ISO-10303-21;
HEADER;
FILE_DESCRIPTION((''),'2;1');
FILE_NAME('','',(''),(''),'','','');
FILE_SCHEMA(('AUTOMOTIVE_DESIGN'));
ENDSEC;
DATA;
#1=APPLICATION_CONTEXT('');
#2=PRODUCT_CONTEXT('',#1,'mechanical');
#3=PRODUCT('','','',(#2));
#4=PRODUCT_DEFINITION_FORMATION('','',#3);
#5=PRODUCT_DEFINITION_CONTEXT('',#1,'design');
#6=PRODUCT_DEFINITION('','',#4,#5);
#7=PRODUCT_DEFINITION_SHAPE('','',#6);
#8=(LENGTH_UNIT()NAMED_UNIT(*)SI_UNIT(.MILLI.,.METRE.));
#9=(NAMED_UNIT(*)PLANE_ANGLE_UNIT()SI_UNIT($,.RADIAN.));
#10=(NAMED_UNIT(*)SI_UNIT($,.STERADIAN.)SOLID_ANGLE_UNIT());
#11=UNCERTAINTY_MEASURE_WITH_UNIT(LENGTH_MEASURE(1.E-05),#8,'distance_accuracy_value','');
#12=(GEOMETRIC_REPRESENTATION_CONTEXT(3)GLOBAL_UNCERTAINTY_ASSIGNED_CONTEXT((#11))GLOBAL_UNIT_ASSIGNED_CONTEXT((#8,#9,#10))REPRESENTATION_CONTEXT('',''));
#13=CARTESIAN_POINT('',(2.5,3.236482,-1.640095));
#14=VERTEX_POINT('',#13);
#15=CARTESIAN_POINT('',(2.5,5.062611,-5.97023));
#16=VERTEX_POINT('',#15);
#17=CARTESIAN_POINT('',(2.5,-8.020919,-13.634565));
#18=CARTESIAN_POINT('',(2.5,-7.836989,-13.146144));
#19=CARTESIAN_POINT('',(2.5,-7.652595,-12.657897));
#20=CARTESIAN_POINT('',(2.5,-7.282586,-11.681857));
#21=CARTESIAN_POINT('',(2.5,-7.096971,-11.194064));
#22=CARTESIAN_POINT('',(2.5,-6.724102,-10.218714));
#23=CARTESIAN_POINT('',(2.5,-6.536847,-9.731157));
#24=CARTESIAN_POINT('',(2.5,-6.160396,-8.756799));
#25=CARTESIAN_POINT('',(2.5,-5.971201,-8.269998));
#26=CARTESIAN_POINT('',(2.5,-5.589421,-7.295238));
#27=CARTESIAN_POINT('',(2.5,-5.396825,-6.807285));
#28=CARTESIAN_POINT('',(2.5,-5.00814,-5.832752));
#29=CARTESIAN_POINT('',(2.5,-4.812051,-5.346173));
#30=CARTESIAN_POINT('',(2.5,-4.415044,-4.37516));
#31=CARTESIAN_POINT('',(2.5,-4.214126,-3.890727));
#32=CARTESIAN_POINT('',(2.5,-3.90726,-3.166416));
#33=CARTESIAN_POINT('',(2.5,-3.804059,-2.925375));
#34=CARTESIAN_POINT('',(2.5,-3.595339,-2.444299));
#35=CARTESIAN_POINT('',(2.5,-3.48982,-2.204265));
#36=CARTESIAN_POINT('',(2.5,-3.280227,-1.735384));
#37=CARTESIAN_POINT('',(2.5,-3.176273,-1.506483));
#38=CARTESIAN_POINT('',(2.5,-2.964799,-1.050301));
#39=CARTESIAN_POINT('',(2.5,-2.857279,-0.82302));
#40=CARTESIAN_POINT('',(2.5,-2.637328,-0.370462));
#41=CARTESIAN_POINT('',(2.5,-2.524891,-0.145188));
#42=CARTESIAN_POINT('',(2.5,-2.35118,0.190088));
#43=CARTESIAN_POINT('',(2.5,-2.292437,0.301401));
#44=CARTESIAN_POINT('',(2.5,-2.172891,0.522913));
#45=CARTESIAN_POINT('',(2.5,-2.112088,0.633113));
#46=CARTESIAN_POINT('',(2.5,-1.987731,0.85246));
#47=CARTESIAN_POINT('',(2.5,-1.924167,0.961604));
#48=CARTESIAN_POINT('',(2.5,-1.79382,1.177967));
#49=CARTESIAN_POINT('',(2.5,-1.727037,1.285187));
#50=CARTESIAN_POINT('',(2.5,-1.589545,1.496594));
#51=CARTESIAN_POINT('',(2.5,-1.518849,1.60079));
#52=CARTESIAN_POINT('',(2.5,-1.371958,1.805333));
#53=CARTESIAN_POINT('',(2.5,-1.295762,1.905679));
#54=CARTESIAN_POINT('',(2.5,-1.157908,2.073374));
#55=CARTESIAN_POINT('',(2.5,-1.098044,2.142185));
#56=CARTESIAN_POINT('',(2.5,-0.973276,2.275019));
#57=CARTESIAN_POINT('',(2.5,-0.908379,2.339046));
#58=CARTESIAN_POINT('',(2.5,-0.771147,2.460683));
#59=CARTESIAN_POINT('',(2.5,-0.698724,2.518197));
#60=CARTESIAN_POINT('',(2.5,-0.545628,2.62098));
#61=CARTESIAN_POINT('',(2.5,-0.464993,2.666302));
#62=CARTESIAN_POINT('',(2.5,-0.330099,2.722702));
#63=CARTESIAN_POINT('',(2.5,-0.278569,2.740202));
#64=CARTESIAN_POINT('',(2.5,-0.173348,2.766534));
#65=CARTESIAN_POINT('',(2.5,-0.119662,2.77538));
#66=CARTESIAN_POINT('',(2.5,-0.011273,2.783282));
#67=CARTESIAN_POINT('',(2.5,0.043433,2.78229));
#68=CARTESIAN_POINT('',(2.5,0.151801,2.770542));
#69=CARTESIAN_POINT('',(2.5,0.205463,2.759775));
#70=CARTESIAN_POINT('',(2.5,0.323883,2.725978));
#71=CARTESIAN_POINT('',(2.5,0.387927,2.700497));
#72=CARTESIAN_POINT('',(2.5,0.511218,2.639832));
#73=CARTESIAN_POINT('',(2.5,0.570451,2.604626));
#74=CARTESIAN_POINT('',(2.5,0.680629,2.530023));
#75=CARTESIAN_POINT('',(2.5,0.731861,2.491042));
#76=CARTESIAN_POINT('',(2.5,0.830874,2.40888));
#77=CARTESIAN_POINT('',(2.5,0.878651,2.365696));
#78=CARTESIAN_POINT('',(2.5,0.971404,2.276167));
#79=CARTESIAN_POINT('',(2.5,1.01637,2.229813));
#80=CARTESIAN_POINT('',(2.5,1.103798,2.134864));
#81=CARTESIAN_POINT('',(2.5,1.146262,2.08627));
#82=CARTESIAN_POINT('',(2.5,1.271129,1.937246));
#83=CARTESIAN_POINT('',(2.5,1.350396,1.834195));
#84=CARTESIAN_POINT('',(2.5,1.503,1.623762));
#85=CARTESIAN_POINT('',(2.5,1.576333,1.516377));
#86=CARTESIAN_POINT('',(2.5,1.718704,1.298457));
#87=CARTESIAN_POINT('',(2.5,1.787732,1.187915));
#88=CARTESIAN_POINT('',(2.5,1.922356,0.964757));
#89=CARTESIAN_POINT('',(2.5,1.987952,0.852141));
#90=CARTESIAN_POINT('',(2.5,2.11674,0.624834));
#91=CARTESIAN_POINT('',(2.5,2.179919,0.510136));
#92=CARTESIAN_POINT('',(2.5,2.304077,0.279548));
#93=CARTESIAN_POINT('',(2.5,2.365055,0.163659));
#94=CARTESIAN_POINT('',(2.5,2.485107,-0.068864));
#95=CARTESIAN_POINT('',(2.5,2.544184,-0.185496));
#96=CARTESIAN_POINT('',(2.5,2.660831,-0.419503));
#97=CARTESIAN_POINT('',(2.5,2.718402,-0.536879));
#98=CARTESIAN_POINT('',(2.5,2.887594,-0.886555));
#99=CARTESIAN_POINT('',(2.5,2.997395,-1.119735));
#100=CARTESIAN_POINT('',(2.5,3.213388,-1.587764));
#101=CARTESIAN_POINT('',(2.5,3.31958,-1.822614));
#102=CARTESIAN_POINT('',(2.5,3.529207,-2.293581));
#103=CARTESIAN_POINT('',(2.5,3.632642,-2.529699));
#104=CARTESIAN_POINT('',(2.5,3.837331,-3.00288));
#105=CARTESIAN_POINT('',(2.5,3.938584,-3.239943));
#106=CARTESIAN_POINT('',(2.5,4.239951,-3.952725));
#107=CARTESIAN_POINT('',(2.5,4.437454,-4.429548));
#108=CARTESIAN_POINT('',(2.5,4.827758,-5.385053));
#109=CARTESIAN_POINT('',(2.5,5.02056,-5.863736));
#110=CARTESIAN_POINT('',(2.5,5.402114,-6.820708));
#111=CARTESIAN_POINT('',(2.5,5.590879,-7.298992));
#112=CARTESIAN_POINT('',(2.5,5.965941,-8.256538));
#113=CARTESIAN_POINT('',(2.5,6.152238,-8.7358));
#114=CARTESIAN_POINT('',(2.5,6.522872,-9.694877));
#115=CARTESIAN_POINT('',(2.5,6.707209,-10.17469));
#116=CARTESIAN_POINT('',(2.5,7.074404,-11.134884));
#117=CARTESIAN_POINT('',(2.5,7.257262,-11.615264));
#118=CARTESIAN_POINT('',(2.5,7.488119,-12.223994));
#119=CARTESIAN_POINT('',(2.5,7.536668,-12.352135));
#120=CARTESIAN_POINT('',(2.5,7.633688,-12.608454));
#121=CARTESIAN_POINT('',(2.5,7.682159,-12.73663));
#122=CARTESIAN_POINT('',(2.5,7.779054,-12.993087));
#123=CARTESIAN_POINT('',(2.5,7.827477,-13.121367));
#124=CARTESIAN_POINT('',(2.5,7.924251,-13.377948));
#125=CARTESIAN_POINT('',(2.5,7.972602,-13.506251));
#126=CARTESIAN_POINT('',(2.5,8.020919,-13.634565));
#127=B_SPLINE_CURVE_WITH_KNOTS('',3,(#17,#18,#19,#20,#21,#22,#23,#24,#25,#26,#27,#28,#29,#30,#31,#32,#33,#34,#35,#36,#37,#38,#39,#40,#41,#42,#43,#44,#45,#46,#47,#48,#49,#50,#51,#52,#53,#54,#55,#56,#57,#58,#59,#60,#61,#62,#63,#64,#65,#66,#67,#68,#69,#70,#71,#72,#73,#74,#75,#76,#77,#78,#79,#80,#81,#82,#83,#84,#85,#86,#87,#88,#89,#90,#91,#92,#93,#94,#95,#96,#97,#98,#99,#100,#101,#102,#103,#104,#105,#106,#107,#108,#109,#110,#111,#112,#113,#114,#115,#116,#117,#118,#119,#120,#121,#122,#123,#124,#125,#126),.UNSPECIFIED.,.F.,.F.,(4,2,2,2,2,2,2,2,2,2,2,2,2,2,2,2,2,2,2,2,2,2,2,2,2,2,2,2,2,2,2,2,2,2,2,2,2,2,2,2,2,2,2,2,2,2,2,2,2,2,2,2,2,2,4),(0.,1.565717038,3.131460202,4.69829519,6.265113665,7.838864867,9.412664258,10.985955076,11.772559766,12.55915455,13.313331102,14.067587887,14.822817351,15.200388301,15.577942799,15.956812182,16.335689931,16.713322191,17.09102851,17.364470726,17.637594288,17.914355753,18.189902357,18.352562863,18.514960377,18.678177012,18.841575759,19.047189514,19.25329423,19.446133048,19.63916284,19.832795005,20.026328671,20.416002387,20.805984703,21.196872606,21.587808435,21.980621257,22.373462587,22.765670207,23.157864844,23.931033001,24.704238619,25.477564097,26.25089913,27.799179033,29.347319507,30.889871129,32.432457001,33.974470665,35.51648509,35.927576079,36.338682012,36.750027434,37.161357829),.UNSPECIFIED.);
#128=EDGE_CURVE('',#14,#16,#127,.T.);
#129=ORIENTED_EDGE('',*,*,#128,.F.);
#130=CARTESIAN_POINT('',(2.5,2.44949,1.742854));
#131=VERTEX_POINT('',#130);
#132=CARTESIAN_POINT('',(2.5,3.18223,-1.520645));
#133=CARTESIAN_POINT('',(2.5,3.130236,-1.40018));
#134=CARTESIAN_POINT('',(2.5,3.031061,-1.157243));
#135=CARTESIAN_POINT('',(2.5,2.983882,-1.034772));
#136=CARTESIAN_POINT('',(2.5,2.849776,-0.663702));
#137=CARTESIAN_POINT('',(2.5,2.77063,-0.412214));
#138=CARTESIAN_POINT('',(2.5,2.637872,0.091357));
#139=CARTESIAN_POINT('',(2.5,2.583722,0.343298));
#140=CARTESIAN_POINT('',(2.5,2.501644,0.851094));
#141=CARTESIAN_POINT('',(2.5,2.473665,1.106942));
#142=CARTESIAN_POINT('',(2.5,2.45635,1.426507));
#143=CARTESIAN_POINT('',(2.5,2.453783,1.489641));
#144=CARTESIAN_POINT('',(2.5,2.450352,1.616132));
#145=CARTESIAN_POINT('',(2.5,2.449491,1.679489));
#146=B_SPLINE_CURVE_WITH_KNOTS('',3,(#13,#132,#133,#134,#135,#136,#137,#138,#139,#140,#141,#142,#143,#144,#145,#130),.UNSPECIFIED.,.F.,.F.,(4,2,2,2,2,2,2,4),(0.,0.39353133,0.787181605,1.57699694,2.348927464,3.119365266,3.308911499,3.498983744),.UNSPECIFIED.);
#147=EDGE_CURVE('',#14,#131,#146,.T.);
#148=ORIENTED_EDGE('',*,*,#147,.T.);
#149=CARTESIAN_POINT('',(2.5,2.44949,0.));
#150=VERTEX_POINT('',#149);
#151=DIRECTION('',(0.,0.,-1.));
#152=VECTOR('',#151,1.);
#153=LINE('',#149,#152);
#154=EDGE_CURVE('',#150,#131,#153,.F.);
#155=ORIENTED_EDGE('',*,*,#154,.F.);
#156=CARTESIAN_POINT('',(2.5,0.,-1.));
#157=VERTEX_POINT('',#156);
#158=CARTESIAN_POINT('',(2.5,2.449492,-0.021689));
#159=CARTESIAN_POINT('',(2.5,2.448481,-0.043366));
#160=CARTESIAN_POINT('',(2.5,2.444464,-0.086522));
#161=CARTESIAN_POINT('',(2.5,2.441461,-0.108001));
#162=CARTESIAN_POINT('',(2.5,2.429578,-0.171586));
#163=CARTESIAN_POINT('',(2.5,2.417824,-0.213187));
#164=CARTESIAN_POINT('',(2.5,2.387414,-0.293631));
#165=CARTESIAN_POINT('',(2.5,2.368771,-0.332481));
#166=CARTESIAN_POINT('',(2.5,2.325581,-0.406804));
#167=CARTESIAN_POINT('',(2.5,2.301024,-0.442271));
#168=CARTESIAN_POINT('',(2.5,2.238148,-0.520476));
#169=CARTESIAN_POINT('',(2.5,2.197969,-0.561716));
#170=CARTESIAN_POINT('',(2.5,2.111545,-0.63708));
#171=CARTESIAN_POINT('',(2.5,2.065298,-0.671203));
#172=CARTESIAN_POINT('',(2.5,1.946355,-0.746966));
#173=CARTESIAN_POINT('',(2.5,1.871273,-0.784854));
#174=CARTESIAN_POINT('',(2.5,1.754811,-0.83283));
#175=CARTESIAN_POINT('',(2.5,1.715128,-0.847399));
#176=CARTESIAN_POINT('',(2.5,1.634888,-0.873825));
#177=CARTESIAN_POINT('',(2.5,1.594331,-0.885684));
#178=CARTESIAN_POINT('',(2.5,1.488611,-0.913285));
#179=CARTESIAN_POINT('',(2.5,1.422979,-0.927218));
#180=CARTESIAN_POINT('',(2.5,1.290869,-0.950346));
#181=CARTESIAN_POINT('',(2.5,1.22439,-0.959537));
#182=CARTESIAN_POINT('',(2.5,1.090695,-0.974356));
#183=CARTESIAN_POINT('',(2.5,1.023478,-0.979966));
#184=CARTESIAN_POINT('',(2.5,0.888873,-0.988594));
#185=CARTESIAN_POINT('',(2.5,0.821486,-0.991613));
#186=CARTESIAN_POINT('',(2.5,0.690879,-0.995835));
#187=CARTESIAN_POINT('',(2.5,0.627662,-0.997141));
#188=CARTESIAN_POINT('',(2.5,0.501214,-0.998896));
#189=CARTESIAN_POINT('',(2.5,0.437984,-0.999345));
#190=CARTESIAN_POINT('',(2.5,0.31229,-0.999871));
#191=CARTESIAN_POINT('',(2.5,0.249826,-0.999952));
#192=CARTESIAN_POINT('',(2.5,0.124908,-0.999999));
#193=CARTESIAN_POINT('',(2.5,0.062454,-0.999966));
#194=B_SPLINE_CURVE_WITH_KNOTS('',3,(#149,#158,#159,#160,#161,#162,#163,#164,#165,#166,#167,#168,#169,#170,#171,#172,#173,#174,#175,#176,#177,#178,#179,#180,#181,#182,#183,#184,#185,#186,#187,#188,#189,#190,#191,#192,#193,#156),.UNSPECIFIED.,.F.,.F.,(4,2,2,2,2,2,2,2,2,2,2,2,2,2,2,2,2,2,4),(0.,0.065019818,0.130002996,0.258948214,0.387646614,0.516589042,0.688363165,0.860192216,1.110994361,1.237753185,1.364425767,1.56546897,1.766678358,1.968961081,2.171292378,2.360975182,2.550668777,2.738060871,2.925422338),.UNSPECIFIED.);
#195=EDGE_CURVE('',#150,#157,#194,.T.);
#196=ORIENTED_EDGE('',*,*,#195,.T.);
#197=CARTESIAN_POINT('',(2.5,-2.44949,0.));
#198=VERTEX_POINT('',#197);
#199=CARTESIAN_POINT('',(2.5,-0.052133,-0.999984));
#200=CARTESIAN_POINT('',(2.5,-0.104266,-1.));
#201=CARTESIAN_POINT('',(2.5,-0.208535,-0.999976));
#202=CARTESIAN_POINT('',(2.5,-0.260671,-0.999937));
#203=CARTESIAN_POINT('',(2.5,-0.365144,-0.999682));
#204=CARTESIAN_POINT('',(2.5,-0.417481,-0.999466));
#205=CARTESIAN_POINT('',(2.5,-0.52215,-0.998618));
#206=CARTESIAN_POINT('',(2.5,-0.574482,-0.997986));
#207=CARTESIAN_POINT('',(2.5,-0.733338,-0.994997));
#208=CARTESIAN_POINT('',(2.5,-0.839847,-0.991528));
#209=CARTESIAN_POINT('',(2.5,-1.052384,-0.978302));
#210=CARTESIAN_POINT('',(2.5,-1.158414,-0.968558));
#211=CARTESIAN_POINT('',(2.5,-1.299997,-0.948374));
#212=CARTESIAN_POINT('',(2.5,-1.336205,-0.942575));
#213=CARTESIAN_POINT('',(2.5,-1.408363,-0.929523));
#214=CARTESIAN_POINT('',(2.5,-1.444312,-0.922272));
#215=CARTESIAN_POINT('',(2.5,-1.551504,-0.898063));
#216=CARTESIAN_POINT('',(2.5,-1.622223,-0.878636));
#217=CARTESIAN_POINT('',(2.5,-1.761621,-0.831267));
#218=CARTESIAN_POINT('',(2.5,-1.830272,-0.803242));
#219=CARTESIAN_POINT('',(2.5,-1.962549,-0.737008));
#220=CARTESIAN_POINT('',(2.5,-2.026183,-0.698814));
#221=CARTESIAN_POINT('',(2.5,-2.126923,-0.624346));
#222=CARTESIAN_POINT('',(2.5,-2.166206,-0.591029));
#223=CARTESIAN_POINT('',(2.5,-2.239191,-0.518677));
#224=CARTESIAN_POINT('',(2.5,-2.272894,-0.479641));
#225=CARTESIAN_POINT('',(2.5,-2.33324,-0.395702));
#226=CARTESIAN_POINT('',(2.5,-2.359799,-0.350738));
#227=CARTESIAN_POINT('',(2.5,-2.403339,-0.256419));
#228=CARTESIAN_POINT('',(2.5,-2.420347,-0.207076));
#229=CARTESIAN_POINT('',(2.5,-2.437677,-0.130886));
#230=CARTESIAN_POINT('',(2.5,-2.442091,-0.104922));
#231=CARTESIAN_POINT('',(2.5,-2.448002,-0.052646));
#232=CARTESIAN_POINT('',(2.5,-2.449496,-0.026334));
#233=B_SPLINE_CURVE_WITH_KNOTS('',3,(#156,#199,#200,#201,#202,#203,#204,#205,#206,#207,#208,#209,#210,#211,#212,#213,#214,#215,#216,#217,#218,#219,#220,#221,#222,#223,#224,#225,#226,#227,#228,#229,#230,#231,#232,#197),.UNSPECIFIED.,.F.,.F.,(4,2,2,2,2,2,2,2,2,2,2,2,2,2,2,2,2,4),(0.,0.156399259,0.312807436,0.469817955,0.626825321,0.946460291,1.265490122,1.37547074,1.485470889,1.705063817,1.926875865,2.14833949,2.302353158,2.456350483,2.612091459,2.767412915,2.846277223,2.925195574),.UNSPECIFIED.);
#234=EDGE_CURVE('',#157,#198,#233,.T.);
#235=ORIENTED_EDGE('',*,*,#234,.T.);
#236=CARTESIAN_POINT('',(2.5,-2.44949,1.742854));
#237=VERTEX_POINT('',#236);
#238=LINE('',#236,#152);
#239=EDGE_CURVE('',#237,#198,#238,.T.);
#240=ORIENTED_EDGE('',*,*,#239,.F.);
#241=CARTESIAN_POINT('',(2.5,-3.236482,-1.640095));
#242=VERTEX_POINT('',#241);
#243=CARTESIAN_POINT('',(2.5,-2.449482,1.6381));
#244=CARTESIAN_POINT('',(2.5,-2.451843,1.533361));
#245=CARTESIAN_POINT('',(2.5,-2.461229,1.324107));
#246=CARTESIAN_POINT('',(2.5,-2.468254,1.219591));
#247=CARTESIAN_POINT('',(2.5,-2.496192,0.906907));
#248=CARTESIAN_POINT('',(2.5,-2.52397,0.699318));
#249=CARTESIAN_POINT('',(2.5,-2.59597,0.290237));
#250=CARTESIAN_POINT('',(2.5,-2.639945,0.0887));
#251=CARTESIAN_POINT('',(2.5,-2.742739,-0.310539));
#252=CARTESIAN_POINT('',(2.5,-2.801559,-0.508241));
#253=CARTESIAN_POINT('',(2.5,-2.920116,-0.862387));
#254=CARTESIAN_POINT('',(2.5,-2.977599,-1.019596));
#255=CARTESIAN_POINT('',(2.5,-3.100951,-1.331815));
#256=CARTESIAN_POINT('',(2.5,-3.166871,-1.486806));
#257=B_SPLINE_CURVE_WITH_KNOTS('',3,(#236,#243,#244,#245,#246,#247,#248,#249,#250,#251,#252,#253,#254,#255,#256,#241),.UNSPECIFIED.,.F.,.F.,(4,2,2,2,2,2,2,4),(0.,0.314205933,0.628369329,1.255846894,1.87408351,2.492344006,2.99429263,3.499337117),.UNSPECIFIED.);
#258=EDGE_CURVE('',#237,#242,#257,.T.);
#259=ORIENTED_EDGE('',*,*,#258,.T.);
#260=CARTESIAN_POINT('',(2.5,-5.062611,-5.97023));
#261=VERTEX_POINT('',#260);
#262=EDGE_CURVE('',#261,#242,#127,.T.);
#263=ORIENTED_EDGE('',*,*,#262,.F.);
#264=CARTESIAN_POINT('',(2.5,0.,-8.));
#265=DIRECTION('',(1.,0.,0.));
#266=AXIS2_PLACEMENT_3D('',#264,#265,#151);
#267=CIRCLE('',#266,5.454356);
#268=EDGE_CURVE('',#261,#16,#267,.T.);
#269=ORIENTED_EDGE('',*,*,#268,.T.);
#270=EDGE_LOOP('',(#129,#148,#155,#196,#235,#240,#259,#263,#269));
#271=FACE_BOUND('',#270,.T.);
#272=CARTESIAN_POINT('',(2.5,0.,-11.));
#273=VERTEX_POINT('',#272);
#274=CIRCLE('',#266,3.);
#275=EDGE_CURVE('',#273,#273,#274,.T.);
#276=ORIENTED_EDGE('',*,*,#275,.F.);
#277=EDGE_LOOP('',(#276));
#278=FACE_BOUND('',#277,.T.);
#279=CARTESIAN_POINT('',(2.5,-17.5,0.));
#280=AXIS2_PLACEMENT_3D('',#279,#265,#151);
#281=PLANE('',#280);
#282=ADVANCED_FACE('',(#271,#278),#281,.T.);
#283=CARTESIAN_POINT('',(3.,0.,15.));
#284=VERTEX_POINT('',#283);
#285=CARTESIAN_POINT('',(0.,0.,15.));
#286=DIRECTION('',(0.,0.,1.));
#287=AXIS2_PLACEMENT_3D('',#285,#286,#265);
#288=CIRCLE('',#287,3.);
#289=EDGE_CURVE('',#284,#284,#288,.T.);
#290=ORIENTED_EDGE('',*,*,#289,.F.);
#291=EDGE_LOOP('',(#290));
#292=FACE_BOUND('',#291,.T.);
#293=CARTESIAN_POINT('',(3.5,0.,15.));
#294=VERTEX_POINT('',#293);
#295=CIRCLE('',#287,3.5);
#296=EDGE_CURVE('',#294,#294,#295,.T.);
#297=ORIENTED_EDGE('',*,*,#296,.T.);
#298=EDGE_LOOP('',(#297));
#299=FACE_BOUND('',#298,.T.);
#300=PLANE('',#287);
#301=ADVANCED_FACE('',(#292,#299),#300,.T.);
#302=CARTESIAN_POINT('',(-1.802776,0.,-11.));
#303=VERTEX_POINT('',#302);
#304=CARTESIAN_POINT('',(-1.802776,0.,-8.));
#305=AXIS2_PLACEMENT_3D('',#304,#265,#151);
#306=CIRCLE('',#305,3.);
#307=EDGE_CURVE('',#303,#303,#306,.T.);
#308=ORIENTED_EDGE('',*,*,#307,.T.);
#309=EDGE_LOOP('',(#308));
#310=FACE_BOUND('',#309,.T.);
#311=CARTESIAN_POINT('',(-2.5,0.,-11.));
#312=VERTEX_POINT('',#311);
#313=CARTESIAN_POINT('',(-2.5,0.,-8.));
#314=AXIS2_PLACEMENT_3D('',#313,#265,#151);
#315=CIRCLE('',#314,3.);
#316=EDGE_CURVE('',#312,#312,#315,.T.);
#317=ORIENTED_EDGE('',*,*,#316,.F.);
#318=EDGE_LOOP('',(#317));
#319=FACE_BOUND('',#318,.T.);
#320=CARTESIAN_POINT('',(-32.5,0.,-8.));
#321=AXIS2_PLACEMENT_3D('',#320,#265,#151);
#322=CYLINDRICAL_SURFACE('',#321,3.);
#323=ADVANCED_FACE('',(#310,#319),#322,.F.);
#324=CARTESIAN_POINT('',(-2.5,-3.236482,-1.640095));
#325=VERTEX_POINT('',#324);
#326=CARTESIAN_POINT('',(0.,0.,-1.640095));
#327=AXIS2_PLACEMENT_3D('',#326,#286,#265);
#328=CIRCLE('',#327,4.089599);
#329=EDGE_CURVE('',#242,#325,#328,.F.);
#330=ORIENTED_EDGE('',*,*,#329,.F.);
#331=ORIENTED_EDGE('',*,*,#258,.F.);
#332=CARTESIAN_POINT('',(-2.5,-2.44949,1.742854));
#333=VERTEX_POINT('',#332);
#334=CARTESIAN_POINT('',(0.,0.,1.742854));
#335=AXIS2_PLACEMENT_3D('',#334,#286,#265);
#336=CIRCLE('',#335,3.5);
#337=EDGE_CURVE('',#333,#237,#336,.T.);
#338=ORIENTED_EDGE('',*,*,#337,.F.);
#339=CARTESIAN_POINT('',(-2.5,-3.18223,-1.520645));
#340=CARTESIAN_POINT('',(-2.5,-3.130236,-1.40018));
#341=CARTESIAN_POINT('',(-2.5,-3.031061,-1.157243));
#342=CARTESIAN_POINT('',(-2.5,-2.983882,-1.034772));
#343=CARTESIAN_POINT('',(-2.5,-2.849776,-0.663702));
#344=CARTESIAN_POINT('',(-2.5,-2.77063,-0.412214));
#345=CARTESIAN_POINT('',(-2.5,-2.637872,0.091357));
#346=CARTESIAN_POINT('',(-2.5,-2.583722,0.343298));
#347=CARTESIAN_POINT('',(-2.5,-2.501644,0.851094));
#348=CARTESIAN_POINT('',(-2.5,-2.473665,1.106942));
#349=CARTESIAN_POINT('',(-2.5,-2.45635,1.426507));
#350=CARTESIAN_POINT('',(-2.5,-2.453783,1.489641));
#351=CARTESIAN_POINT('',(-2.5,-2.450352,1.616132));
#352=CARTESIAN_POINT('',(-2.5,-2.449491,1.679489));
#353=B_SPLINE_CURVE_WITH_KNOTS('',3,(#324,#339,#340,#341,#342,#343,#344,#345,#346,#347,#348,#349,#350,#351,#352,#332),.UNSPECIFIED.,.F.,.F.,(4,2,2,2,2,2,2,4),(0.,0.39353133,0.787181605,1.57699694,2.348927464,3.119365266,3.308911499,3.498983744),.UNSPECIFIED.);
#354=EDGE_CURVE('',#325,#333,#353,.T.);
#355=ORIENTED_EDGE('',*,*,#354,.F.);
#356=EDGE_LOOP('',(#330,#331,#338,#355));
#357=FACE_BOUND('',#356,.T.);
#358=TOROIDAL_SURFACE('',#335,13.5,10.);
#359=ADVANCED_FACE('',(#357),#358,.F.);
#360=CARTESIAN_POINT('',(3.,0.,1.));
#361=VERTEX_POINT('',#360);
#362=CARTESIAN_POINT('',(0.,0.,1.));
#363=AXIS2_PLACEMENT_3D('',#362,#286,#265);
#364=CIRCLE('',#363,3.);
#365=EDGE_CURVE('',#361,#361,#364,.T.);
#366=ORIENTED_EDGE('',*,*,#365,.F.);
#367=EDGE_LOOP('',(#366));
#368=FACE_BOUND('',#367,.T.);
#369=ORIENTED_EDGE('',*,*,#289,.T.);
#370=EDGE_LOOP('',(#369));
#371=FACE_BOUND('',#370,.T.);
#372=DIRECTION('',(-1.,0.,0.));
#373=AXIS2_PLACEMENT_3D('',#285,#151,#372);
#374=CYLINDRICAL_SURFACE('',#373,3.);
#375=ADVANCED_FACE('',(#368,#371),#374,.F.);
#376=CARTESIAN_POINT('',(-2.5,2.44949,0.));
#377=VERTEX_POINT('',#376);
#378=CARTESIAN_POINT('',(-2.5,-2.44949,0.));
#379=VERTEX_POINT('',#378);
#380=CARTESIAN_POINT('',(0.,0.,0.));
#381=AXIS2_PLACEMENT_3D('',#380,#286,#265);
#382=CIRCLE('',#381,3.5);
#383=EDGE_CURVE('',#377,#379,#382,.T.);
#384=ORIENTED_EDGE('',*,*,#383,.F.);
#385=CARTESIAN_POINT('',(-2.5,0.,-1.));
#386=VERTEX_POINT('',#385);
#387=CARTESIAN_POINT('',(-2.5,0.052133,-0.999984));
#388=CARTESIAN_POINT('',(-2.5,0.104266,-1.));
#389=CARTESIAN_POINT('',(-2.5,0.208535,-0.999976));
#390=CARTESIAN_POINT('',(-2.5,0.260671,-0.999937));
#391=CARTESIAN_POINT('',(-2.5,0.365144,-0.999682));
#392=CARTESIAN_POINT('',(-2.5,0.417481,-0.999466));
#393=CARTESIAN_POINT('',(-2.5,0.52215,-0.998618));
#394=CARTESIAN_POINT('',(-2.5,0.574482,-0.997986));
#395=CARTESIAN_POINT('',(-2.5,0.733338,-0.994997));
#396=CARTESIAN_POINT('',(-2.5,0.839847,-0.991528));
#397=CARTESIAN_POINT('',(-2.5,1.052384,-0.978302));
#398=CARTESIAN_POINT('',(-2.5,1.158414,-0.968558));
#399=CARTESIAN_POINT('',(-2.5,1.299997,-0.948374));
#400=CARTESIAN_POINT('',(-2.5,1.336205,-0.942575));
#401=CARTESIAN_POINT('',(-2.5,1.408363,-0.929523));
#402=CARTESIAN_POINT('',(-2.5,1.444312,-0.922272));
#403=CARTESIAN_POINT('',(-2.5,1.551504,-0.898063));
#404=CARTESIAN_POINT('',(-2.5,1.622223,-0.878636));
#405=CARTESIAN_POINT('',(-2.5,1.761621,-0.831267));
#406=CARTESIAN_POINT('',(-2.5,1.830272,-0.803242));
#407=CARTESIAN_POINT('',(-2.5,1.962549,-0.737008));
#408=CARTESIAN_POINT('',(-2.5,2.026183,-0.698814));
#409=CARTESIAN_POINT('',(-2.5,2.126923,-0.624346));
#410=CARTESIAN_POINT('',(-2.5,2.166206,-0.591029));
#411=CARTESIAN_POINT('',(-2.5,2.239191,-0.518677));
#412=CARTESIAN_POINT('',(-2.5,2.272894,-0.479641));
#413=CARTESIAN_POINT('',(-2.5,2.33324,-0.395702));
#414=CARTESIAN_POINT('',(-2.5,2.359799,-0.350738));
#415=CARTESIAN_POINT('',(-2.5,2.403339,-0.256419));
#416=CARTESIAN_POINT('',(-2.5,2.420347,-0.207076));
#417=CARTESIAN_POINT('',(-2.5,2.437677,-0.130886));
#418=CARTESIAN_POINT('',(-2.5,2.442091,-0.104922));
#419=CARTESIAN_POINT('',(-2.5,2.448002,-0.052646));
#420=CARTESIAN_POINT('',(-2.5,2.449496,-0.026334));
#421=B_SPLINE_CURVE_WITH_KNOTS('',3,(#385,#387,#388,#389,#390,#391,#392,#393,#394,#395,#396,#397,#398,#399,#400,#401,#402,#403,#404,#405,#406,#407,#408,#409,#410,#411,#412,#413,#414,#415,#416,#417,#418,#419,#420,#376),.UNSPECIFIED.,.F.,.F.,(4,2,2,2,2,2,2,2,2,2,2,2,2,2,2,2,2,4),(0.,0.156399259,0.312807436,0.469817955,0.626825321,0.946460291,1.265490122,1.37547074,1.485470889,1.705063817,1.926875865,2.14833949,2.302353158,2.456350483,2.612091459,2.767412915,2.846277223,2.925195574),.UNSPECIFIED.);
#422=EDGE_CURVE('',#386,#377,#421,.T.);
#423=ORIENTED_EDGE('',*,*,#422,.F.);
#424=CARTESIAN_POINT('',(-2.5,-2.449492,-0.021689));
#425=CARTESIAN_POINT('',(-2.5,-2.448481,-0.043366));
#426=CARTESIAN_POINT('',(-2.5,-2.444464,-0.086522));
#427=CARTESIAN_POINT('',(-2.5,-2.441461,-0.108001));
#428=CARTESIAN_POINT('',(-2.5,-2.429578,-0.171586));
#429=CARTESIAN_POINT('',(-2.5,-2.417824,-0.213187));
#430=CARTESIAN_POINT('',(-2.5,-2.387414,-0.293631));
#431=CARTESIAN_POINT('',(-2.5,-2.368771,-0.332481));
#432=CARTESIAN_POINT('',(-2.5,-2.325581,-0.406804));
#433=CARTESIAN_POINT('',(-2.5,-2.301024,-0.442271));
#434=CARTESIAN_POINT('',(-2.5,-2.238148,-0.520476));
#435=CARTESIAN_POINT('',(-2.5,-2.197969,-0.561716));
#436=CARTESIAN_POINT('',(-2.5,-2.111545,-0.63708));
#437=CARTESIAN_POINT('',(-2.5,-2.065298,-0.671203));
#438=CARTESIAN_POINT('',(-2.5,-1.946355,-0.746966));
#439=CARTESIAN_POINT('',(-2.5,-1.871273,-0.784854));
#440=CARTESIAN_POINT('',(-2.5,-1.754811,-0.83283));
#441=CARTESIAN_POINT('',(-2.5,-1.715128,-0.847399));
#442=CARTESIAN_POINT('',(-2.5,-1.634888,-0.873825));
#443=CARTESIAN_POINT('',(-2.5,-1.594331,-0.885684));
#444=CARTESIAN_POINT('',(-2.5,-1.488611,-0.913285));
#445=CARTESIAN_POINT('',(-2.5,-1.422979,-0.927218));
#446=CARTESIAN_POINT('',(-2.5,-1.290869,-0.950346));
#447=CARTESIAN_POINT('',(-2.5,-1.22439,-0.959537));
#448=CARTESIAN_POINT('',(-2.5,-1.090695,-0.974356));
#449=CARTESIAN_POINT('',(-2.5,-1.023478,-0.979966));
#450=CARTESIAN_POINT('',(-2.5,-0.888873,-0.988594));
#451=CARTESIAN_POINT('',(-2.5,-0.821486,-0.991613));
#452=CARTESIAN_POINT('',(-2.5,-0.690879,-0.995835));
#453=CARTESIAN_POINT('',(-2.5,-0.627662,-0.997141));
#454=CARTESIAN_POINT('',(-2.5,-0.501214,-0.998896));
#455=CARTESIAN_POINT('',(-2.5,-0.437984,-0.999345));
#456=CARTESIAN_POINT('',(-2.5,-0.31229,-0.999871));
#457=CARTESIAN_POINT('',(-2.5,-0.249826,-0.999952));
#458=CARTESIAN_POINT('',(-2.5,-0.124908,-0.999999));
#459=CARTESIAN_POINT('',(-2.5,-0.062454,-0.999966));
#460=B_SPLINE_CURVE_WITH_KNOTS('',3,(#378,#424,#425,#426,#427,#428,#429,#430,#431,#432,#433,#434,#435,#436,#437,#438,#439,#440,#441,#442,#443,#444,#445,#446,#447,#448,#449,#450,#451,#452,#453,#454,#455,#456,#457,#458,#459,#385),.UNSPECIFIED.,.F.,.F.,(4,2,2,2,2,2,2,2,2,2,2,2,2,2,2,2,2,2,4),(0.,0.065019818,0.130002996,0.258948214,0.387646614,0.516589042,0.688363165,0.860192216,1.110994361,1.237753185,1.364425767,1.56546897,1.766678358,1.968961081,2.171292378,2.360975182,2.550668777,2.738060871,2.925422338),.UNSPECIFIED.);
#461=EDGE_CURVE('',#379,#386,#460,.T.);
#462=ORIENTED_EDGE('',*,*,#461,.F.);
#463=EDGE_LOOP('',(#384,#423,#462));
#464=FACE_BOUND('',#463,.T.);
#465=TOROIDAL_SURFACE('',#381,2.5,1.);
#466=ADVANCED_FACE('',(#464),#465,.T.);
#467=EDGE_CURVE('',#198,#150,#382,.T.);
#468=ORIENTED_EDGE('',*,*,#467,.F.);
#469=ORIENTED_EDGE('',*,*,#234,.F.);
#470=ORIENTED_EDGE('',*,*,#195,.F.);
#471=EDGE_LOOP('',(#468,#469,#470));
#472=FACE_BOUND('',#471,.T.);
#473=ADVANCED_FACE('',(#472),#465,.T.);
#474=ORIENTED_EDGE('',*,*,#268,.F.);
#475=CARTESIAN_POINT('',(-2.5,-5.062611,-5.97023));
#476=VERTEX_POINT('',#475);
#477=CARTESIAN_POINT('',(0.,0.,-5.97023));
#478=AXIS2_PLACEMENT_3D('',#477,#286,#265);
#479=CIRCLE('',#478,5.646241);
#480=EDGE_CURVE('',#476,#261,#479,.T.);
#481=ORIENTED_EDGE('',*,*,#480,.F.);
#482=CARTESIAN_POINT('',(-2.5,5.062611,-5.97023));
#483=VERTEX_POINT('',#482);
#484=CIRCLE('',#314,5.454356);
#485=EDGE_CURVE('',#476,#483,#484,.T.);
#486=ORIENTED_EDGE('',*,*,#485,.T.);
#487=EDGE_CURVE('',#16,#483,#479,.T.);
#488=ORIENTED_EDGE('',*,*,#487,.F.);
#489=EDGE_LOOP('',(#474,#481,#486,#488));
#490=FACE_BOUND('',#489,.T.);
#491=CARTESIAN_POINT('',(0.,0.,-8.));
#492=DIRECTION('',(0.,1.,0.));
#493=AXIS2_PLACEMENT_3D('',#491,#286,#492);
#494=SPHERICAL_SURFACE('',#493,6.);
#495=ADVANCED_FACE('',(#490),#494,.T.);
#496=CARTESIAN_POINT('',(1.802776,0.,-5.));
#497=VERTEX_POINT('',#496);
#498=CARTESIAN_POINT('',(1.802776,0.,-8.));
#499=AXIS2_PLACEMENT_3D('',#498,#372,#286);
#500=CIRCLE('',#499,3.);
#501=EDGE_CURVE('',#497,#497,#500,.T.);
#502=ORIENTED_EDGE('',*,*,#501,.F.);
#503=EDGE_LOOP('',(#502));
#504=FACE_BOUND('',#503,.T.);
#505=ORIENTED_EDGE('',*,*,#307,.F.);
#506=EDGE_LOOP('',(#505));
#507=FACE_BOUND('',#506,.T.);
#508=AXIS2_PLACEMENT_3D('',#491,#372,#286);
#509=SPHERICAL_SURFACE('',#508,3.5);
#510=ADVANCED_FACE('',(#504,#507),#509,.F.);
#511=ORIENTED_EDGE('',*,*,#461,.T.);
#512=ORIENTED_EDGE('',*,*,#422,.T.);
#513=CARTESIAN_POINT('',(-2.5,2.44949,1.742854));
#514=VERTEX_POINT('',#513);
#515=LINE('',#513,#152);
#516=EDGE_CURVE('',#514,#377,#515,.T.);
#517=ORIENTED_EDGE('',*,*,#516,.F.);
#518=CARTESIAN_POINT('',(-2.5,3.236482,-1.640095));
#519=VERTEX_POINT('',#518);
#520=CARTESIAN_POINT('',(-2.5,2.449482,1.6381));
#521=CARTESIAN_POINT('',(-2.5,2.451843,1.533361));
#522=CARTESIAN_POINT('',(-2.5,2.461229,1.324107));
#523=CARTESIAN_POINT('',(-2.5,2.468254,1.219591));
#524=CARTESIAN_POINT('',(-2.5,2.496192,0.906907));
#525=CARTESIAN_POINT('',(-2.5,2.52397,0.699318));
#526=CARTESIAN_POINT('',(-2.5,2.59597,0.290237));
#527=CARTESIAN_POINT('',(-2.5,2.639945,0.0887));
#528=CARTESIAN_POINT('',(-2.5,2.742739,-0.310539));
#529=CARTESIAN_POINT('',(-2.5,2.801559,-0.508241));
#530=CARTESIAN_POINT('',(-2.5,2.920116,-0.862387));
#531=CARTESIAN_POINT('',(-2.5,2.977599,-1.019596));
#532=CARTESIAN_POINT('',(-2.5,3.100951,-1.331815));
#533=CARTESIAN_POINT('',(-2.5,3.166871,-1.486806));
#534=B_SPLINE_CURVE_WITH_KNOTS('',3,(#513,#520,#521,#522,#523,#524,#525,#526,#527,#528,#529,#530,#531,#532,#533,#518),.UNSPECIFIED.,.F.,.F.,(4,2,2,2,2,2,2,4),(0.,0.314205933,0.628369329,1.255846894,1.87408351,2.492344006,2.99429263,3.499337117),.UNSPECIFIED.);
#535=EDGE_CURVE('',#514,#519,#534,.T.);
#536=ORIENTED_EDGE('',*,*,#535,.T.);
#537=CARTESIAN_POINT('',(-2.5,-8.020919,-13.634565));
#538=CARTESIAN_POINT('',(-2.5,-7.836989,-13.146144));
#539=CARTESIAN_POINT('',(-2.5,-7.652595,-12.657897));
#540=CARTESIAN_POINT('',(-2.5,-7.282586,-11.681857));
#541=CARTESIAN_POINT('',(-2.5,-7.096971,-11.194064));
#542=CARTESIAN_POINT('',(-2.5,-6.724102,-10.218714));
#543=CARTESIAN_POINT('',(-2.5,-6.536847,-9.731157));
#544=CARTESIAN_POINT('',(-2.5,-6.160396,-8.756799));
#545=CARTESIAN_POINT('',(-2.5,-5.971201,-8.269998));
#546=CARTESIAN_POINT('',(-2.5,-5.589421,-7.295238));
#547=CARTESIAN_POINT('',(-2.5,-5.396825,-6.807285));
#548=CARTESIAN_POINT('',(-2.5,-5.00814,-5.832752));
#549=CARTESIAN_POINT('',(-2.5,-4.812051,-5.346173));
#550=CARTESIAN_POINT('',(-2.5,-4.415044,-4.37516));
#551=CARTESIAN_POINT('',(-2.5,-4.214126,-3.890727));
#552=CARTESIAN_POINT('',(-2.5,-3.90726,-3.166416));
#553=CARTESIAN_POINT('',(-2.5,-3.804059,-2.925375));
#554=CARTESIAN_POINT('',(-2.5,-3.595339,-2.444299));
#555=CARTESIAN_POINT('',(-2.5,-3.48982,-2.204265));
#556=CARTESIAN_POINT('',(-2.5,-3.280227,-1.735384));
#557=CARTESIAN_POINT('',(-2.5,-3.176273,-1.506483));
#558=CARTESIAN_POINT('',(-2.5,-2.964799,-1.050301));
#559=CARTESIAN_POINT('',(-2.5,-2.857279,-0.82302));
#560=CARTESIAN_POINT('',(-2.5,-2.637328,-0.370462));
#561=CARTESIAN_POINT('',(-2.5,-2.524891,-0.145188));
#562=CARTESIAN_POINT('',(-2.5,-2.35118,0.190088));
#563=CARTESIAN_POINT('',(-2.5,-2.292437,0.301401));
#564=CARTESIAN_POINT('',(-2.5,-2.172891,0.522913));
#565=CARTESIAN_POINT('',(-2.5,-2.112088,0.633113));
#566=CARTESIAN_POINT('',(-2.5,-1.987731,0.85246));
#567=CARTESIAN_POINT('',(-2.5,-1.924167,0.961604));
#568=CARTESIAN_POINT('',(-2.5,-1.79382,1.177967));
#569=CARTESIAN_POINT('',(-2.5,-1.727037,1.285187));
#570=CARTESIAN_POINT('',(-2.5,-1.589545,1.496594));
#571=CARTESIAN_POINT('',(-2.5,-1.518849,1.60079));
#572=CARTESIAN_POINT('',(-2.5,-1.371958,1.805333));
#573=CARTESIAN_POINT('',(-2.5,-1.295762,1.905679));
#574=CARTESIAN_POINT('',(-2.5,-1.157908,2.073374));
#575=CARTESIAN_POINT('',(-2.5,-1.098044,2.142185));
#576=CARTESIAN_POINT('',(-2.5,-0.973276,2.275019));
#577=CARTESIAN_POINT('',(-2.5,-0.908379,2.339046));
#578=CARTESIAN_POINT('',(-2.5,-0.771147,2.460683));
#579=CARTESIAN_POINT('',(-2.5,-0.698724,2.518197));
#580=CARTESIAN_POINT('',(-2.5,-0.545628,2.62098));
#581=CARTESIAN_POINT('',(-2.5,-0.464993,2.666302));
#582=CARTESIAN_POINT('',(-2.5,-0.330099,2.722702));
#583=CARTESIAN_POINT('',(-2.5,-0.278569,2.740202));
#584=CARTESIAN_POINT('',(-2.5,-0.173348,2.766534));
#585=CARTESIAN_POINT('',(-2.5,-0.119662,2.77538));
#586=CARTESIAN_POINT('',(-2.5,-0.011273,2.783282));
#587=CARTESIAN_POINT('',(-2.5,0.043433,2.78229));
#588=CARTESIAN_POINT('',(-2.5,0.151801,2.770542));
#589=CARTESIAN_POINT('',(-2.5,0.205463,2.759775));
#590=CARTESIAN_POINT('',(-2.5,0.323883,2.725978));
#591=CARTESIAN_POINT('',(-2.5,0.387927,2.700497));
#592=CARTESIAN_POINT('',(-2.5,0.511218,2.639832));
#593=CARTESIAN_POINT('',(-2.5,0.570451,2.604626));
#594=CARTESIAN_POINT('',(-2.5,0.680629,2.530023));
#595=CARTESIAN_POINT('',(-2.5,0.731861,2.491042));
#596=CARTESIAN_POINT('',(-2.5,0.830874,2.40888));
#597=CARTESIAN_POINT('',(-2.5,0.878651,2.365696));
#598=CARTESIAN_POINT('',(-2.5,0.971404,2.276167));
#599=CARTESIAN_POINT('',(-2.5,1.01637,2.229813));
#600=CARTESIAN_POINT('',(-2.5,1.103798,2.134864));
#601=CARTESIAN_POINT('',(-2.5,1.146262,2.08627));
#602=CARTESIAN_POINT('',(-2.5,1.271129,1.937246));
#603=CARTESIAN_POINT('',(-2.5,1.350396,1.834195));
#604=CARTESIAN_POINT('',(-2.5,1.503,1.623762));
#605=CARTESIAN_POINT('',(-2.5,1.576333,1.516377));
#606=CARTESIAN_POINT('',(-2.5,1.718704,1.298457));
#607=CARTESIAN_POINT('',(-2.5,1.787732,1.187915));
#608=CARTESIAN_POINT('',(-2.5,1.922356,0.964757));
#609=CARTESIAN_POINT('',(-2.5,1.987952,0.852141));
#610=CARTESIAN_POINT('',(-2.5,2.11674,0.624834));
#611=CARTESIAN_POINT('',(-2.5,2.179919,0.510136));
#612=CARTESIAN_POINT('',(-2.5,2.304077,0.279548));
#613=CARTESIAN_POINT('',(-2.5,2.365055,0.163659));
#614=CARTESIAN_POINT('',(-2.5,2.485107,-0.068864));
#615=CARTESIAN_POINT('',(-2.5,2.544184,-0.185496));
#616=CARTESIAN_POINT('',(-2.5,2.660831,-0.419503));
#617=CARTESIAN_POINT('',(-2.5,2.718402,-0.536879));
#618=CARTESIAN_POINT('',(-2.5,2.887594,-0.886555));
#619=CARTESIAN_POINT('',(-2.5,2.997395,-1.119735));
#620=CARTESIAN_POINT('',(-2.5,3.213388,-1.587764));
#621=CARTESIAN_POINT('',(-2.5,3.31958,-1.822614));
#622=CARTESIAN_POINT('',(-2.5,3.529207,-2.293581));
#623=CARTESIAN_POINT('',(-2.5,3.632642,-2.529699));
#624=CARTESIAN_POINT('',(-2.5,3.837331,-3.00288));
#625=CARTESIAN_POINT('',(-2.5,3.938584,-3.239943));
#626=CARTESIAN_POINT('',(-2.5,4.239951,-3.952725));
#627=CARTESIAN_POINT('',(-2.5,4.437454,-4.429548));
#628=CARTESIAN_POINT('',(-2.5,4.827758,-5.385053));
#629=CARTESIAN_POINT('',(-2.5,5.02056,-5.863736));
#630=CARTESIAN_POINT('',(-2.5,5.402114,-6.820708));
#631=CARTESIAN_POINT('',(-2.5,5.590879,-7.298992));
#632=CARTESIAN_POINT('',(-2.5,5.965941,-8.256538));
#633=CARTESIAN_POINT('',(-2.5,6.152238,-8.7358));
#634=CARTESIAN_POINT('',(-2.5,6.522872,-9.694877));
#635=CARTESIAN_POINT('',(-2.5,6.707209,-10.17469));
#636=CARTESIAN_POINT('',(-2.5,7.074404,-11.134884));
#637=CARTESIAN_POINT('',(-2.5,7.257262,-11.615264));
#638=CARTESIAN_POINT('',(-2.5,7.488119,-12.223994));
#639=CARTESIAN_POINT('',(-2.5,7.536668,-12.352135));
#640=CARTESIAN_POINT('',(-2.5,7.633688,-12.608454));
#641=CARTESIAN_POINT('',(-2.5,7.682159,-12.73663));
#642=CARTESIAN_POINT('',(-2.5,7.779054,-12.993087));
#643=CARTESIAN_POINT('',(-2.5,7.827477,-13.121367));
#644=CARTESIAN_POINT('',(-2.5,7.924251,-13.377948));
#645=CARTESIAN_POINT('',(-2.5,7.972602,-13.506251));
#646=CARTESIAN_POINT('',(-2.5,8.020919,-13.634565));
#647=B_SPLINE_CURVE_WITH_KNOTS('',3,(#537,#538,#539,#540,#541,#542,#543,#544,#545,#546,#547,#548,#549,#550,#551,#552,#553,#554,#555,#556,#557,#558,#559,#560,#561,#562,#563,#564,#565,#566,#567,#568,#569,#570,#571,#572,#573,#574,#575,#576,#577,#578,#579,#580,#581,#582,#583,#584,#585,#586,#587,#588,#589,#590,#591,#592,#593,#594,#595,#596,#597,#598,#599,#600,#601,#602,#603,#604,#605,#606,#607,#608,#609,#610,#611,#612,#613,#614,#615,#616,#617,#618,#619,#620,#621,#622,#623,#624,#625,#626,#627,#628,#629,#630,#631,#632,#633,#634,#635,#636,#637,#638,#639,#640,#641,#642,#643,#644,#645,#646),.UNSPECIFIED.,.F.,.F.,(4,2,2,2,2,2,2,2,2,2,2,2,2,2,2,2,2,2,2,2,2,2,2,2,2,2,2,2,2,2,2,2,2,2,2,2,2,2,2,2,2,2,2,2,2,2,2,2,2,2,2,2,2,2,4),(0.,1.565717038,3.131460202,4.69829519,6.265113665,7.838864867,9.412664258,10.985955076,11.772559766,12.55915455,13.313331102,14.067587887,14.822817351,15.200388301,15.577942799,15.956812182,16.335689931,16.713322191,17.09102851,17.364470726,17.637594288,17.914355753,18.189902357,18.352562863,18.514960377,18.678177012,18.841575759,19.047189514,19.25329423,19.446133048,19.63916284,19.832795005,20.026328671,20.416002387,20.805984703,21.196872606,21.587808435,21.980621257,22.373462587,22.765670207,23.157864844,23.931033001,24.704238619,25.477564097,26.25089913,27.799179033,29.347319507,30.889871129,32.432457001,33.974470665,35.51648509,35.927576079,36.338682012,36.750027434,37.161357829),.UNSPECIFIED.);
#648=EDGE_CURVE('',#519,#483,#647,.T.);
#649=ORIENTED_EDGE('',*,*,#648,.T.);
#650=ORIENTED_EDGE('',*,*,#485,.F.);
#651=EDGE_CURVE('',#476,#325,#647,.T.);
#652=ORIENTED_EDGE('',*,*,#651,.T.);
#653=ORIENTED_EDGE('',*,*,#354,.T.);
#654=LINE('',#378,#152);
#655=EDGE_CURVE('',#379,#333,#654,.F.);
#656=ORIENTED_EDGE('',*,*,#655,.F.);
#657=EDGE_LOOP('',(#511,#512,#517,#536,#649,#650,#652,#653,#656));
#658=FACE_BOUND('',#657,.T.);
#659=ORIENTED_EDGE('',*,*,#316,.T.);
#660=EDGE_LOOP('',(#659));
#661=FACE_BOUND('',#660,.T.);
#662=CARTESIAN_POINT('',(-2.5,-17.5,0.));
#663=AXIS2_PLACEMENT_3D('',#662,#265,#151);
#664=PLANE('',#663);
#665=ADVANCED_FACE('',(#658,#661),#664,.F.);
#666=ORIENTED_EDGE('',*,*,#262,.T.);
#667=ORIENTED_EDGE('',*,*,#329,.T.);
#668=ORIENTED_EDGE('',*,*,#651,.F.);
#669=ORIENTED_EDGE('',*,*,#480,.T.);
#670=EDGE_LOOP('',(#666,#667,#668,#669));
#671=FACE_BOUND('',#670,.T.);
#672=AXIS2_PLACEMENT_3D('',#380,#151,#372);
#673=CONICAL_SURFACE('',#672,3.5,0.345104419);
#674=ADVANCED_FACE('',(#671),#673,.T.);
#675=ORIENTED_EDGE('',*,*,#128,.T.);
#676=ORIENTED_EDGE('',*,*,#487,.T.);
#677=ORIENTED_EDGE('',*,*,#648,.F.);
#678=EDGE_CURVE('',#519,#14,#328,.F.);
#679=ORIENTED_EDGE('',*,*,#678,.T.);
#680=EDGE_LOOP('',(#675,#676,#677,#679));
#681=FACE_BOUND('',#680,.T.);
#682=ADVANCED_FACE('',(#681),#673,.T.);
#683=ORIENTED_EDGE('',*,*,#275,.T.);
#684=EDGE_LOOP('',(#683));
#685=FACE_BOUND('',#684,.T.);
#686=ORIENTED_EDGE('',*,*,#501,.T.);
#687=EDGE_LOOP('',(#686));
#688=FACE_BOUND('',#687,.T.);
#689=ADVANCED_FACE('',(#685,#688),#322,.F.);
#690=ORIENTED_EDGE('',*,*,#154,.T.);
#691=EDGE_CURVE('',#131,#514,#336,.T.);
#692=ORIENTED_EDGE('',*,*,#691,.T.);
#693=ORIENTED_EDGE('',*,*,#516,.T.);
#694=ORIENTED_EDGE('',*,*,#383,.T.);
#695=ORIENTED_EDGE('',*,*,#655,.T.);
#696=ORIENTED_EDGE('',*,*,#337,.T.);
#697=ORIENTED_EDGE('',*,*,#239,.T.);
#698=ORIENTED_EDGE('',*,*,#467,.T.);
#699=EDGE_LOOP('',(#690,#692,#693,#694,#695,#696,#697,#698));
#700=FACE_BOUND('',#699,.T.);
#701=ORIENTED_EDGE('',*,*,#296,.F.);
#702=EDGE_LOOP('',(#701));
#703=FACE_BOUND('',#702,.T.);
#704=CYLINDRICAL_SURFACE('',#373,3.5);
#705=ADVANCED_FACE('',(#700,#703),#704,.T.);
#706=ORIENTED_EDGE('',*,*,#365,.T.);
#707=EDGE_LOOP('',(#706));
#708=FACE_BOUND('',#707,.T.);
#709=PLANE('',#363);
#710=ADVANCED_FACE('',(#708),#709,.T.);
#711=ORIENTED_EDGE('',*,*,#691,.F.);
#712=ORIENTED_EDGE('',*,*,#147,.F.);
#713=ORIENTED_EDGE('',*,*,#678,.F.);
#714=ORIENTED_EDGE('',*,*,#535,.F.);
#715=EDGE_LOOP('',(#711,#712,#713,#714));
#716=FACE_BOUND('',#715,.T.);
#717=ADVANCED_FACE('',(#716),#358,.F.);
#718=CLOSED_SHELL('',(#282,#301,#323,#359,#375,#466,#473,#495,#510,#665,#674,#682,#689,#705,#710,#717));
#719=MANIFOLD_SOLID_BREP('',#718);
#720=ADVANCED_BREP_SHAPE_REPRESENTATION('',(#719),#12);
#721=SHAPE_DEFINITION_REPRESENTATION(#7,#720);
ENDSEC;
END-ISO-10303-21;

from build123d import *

# Parameters (mm, degrees)
SKETCH2_W           = 3.765548925
SKETCH2_H           = 14.748929387
SKETCH2_W_2         = 4.619974481
CUT_EXTRUDE1_DEPTH  = 17.5
CHAMFER1_SIZE       = 0.353571801
CHAMFER1_SIZE_2     = 0.5
SKETCH3_R           = 3
CUT_EXTRUDE2_DEPTH  = 35
SKETCH4_R           = 3.5
SKETCH4_R_2         = 3
BOSS_EXTRUDE1_DEPTH = 15
BOSS_EXTRUDE2_DEPTH = 1
BOSS_EXTRUDE3_START = -1
SKETCH4_2_R         = 3.5
SKETCH4_2_R_2       = 3
BOSS_EXTRUDE3_DEPTH = 1
BOSS_EXTRUDE4_START = -1
BOSS_EXTRUDE4_DEPTH = 1
FILLET1_R           = 1
FILLET2_R           = 10


# Some blends are built 0.0001 mm under size
with BuildPart() as part:
    # Sketch1 → Revolve1 (revolve)
    with BuildSketch(Plane(origin=(0, 0, 0), x_dir=(0, 0, -1), z_dir=(1, 0, 0))):
        with BuildLine():
            Line((0, 3.5), (0, 0))
            Line((0, 0), (4.5, 0))
            ThreePointArc((4.5, 0), (8, 3.5), (11.5, 0))
            Line((11.5, 0), (14, 0))
            ThreePointArc((14, 0), (11.451186904, 4.908086078), (5.97023035, 5.6462408))
            Line((5.97023035, 5.6462408), (0, 3.5))
        make_face()
    revolve(axis=Axis((0, 0, 0), (0, 0, -1)))

    # Sketch2 → Cut-Extrude1 (cut, symmetric)
    with BuildSketch(Plane(origin=(0, 0, 0), x_dir=(1, 0, 0), z_dir=(0, 1, 0))):
        with Locations((-4.382774463, 6.625535306)):
            Rectangle(SKETCH2_W, SKETCH2_H)
        with Locations((4.80998724, 6.625535306)):
            Rectangle(SKETCH2_W_2, SKETCH2_H)
    extrude(amount=CUT_EXTRUDE1_DEPTH, both=True, mode=Mode.SUBTRACT)

    # Chamfer1
    # the kernel refuses this chamfer: 0.5, 0.353571801 mm, written as the material it takes off along each edge
    with BuildSketch(Plane(origin=(-2.5, 0, -8), x_dir=(0, 0, 1), z_dir=(0, 1, 0))) as chamfer1_piece_1:
        with BuildLine():
            Line((2.807242504, 0.409691525), (2.449489743 + CHAMFER1_SIZE * 0.999999998636, 0))
            Line((2.449489743 + CHAMFER1_SIZE * 0.999999998636, 0), (2.449489743, 0))
            ThreePointArc((2.449489743, 0), (2.641353047, 0.203643303), (2.807242504, 0.409691525))
        make_face()
    revolve(axis=Axis((-2.5, 0, -8), (1, 0, 0)), mode=Mode.SUBTRACT)
    with BuildSketch(Plane(origin=(2.5, 0, -8), x_dir=(0, 0, -1), z_dir=(0, 1, 0))) as chamfer1_piece_2:
        with BuildLine():
            Line((2.449489743 + CHAMFER1_SIZE_2, 0), (2.689392867, 0.260096876))
            ThreePointArc((2.689392867, 0.260096876), (2.573005025, 0.127312675), (2.449489743, 0))
            Line((2.449489743, 0), (2.449489743 + CHAMFER1_SIZE_2, 0))
        make_face()
    revolve(axis=Axis((2.5, 0, -8), (-1, 0, 0)), mode=Mode.SUBTRACT)

    # Sketch3 → Cut-Extrude2 (cut)
    with BuildSketch(Plane(origin=(2.5, 0, 0), x_dir=(0, 0, -1), z_dir=(1, 0, 0))):
        with Locations((8, 0)):
            Circle(SKETCH3_R)
    extrude(amount=-CUT_EXTRUDE2_DEPTH, mode=Mode.SUBTRACT)

    # Sketch4 → Boss-Extrude1 (add)
    with BuildSketch(Plane.XY):
        with Locations(Location((0, 0, 0), (0, 0, 135.584691403))):
            Circle(SKETCH4_R)
        with Locations(Location((0, 0, 0), (0, 0, 213.557309762))):
            Circle(SKETCH4_R_2, mode=Mode.SUBTRACT)
    extrude(amount=BOSS_EXTRUDE1_DEPTH)

    # Sketch5 → Boss-Extrude2 (add)
    with BuildSketch(Plane.XY):
        with BuildLine():
            Line((2.5, 1.658312395), (2.5, -1.658312395))
            ThreePointArc((2.5, -1.658312395), (2.872281323, -0.866025404), (3, 0))
            ThreePointArc((3, 0), (2.872281323, 0.866025404), (2.5, 1.658312395))
        make_face()
        with BuildLine():
            ThreePointArc((-2.5, -1.658312395), (0, -3), (2.5, -1.658312395))
            Line((2.5, -1.658312395), (2.5, 1.658312395))
            ThreePointArc((2.5, 1.658312395), (0, 3), (-2.5, 1.658312395))
            Line((-2.5, 1.658312395), (-2.5, -1.658312395))
        make_face()
        with BuildLine():
            ThreePointArc((-2.5, 1.658312395), (-3, 0), (-2.5, -1.658312395))
            Line((-2.5, -1.658312395), (-2.5, 1.658312395))
        make_face()
    extrude(amount=BOSS_EXTRUDE2_DEPTH)

    # Sketch4<2> → Boss-Extrude3 (add)
    with BuildSketch(Plane.XY.offset(BOSS_EXTRUDE3_START)):
        with Locations(Location((0, 0, 0), (0, 0, 135.584691403))):
            Circle(SKETCH4_2_R)
        Circle(SKETCH4_2_R_2, mode=Mode.SUBTRACT)
    extrude(amount=BOSS_EXTRUDE3_DEPTH)

    # Sketch5<4> → Boss-Extrude4 (add)
    with BuildSketch(Plane.XY.offset(BOSS_EXTRUDE4_START)):
        with BuildLine():
            Line((2.5, 1.658312395), (2.5, -1.658312395))
            ThreePointArc((2.5, -1.658312395), (2.872281323, -0.866025404), (3, 0))
            ThreePointArc((3, 0), (2.872281323, 0.866025404), (2.5, 1.658312395))
        make_face()
        with BuildLine():
            ThreePointArc((-2.5, 1.658312395), (-3, 0), (-2.5, -1.658312395))
            Line((-2.5, -1.658312395), (-2.5, 1.658312395))
        make_face()
    extrude(amount=BOSS_EXTRUDE4_DEPTH)

    # Fillet1
    fillet1_edges = [part.edges().sort_by_distance(p)[0] for p in [
        (-3.5, 0, -1),
        (3.5, 0, -1),
    ]]
    fillet(fillet1_edges, radius=FILLET1_R - 0.0001)  # a hair under: the kernel refuses the full size

    # Fillet2
    # the kernel refuses this fillet: 10 mm, written as the material it adds along each edge
    with BuildSketch(Plane(origin=(0, 0, 0), x_dir=(-0.8914706902273792, -0.453078369010837, 0), z_dir=(0.453078369010837, -0.8914706902273792, 0))) as fillet2_piece_1_section:
        with BuildLine():
            CenterArc((3.5 + FILLET2_R, -FILLET2_R * 0.174285392608), FILLET2_R, 160.226973292, 19.773026708)
            Line((3.5 + FILLET2_R * 0.0589598667305, FILLET2_R * 0.164009549087), (3.5, 0))
            Line((3.5, 0), (3.5, -FILLET2_R * 0.174285392608))
        make_face()
    fillet2_piece_1 = revolve(axis=Axis((0, 0, 0), (0, 0, -1)), revolution_arc=233.882722234, mode=Mode.PRIVATE)
    fillet2_piece_1 = split(fillet2_piece_1, bisect_by=Plane(origin=(2.5, 0, 0), z_dir=(-1, 0, 0)), keep=Keep.TOP, mode=Mode.PRIVATE)
    fillet2_piece_1 = split(fillet2_piece_1, bisect_by=Plane(origin=(-2.5, 0, 0), z_dir=(1, 0, 0)), keep=Keep.TOP, mode=Mode.PRIVATE)
    add(fillet2_piece_1)
    with BuildSketch(Plane(origin=(0, 0, 0), x_dir=(0.8914706902273793, 0.4530783690108364, 0), z_dir=(-0.4530783690108364, 0.8914706902273793, 0))) as fillet2_piece_2_section:
        with BuildLine():
            CenterArc((3.5 + FILLET2_R, -FILLET2_R * 0.174285392608), FILLET2_R, 160.226973292, 19.773026708)
            Line((3.5 + FILLET2_R * 0.0589598667305, FILLET2_R * 0.164009549087), (3.5, 0))
            Line((3.5, 0), (3.5, -FILLET2_R * 0.174285392608))
        make_face()
    fillet2_piece_2 = revolve(axis=Axis((0, 0, 0), (0, 0, -1)), revolution_arc=233.882722234, mode=Mode.PRIVATE)
    fillet2_piece_2 = split(fillet2_piece_2, bisect_by=Plane(origin=(2.5, 0, 0), z_dir=(-1, 0, 0)), keep=Keep.TOP, mode=Mode.PRIVATE)
    fillet2_piece_2 = split(fillet2_piece_2, bisect_by=Plane(origin=(-2.5, 0, 0), z_dir=(1, 0, 0)), keep=Keep.TOP, mode=Mode.PRIVATE)
    add(fillet2_piece_2)


solid = part.part
